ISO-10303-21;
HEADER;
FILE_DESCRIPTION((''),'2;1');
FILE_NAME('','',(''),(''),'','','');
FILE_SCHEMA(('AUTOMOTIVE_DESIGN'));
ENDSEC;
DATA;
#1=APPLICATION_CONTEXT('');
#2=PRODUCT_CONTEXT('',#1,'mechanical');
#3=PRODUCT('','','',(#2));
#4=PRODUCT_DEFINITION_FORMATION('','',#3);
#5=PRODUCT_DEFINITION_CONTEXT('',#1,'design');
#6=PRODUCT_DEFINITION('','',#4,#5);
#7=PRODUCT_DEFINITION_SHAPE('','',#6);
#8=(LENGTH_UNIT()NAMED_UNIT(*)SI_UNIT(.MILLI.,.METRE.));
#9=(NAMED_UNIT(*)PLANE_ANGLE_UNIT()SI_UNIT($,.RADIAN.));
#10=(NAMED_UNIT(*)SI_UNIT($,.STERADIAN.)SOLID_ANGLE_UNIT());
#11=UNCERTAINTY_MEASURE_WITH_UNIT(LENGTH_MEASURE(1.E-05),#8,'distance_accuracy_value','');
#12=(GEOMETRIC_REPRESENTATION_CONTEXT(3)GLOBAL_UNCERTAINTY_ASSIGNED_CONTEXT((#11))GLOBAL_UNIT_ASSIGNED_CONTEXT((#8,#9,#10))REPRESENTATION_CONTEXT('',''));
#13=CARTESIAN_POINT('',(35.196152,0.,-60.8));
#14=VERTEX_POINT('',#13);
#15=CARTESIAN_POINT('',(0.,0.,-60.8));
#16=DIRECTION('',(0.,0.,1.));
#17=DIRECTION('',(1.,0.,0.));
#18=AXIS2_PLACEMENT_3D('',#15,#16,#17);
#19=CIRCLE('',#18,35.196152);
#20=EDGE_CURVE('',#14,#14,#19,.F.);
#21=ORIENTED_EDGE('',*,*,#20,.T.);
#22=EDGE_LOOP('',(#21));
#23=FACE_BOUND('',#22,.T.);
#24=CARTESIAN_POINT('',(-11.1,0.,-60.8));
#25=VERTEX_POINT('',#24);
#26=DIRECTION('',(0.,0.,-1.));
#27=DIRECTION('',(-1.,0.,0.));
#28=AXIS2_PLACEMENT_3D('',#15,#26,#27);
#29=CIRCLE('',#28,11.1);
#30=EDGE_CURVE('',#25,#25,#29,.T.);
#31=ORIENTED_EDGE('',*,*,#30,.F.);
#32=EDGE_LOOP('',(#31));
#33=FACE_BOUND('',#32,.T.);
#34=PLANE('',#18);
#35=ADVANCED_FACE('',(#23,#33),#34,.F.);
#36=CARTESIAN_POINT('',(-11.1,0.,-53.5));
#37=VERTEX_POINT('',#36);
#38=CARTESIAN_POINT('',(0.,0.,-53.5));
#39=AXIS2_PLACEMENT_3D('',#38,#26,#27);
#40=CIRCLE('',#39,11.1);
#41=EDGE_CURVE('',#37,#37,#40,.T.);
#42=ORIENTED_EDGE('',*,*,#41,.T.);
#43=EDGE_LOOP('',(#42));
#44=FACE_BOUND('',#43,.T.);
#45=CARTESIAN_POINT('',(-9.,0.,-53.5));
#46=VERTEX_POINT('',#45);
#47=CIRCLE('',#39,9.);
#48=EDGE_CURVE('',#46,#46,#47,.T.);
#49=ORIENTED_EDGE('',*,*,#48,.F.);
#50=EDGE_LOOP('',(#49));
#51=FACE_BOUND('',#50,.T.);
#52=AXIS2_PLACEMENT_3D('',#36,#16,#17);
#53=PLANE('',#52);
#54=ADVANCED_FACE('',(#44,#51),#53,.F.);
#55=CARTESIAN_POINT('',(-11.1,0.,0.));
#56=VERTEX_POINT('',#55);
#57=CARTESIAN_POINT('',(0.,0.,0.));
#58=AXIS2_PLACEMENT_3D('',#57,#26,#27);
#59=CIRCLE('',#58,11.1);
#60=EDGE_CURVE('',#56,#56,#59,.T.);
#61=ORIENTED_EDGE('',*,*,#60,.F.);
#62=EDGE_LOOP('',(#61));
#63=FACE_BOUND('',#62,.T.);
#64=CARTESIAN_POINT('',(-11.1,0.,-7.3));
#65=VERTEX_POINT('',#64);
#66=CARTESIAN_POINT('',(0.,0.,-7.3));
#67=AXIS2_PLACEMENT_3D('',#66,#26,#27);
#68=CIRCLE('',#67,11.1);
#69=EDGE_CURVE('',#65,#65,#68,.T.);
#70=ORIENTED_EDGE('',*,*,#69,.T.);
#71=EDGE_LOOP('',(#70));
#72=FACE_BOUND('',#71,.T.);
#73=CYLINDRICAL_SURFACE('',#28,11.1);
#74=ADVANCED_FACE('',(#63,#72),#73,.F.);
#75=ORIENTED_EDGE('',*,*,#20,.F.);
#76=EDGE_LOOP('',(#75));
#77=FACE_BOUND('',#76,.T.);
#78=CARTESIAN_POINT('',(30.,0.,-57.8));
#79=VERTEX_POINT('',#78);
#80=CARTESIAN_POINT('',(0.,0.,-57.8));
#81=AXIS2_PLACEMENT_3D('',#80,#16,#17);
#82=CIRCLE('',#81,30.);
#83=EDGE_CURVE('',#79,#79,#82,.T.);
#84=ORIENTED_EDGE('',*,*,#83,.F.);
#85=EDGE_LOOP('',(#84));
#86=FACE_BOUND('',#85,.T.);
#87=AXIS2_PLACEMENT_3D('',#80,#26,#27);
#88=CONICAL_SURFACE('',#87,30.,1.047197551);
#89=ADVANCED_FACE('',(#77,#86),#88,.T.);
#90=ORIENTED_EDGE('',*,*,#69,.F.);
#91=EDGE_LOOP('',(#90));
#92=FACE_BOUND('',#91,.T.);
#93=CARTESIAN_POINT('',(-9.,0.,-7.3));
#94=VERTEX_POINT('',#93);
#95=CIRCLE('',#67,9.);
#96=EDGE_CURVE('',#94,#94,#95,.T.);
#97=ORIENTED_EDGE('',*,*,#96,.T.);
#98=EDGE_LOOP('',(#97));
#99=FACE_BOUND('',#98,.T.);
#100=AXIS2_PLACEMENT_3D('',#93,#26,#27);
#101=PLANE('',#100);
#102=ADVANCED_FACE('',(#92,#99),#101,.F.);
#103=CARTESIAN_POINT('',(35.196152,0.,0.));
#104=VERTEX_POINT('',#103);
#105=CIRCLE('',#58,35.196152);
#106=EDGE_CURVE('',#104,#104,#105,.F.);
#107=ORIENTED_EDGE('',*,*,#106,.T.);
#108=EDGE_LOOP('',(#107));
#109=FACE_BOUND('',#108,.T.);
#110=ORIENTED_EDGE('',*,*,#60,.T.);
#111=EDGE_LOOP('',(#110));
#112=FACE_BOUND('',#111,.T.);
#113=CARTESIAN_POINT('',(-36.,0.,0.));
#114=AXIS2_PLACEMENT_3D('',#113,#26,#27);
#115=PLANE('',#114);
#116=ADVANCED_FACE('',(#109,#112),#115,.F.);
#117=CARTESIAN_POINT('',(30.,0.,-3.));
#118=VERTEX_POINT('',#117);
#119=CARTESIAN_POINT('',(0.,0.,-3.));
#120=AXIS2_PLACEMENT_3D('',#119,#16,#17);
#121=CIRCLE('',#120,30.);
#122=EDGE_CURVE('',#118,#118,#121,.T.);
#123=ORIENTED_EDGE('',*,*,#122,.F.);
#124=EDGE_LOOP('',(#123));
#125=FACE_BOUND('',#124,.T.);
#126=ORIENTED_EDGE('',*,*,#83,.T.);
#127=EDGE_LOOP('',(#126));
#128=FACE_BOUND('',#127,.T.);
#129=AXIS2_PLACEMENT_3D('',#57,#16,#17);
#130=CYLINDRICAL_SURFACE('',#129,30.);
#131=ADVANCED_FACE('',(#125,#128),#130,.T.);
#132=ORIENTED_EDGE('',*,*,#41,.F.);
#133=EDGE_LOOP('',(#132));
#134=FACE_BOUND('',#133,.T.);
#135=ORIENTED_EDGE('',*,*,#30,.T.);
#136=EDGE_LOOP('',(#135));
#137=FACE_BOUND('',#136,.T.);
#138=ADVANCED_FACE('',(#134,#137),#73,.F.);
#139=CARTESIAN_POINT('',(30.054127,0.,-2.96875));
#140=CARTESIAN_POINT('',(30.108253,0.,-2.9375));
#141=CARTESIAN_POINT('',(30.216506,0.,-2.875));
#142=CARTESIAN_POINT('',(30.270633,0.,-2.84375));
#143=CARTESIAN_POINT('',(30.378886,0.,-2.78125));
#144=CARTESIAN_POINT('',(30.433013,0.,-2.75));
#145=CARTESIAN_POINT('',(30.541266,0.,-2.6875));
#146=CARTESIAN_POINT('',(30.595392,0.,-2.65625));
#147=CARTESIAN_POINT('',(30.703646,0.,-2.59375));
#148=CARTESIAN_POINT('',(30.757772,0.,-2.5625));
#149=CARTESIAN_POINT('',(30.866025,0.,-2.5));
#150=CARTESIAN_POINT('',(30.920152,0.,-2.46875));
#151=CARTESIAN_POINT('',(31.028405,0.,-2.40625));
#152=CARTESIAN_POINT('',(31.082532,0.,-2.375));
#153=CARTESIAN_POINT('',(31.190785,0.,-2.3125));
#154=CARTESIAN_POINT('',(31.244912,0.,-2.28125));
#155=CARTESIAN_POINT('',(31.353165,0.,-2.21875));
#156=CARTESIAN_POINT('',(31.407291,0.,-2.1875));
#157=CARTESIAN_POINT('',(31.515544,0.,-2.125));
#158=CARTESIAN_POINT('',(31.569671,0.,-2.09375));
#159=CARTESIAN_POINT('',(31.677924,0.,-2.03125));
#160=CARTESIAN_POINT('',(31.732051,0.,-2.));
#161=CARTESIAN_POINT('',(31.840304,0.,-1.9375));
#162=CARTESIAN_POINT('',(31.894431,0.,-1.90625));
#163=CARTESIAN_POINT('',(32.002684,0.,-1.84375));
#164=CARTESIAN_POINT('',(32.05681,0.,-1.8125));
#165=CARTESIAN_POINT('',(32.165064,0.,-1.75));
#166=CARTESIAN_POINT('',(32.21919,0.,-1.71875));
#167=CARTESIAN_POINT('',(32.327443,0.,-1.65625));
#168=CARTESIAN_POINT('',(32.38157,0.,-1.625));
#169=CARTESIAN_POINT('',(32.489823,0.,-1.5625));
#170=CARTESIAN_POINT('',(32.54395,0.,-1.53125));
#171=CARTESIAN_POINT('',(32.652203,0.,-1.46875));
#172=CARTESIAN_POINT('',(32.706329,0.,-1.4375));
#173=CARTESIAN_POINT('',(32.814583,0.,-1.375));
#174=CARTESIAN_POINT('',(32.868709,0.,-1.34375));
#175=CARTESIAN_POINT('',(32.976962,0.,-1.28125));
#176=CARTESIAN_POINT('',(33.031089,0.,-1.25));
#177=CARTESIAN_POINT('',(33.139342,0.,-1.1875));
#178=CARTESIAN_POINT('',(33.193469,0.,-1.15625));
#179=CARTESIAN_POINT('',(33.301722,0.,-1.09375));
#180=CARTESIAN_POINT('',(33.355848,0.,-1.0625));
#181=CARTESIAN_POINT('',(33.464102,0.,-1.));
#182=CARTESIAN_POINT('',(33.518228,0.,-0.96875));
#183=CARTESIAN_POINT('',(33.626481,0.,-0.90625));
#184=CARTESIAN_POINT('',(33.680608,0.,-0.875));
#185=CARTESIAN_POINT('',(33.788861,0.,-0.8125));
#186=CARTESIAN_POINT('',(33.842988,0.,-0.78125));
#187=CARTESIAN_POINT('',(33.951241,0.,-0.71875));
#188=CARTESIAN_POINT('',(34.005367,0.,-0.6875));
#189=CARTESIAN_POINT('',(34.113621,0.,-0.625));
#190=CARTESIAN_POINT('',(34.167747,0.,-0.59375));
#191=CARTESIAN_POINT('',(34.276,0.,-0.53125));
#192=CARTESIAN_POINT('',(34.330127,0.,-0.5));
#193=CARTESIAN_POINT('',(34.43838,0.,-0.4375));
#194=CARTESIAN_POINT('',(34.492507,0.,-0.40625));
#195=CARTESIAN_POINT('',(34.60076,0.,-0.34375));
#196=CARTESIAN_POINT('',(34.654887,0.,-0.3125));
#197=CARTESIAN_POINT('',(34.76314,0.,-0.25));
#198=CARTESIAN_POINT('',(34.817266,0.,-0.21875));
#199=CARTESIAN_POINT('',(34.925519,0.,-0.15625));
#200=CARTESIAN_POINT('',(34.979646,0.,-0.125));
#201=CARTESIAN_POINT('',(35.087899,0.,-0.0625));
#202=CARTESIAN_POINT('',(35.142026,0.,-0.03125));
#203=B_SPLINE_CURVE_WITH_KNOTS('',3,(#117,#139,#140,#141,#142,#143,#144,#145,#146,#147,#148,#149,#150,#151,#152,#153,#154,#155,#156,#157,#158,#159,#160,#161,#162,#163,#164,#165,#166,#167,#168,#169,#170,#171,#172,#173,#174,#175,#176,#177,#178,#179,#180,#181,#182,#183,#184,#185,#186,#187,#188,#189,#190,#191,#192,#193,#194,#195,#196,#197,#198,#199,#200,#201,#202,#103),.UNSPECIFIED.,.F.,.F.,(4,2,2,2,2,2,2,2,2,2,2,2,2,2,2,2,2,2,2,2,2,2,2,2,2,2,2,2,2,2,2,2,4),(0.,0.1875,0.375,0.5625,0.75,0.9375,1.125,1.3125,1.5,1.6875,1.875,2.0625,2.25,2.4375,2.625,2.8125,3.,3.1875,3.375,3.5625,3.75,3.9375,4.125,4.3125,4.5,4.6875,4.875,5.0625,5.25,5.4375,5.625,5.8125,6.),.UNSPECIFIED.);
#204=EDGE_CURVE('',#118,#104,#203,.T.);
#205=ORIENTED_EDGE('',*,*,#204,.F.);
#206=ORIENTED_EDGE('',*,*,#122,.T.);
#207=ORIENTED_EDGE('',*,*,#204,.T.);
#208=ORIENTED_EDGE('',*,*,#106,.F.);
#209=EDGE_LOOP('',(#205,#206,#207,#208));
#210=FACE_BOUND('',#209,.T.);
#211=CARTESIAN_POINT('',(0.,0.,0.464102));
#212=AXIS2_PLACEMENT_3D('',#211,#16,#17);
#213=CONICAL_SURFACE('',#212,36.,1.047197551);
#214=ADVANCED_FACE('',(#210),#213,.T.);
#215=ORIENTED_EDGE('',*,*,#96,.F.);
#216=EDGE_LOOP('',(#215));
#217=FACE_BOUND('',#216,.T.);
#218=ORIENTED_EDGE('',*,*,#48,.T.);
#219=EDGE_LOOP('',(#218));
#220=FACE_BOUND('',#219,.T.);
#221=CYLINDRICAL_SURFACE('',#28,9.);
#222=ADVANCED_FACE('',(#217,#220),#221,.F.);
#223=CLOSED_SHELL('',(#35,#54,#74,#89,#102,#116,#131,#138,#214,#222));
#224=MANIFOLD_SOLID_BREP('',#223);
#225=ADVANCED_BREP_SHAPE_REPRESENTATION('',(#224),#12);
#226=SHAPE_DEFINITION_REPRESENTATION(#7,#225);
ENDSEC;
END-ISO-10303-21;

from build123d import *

# Parameters (mm, degrees)
CHAMFER1_SIZE   = 3.464101615
CHAMFER1_SIZE_2 = 6


with BuildPart() as part:
    # Sketch1 → Revolve1 (revolve)
    with BuildSketch(Plane(origin=(0, 0, 0), x_dir=(1, 0, 0), z_dir=(0, 1, 0)), mode=Mode.PRIVATE) as revolve1_sk:
        Polygon((0, 0), (0, 60.8), (-36, 60.8), (-36, 57.8), (-30, 57.8), (-30, 3), (-36, 3), (-36, 0), align=None)
    revolve(revolve1_sk.sketch.rotate(Axis((0, 0, 0), (0, 0, -1)), 180), axis=Axis((0, 0, 0), (0, 0, -1)))

    # Sketch7 → Cut-Revolve1 (revolve, cut)
    with BuildSketch(Plane(origin=(0, 0, 0), x_dir=(1, 0, 0), z_dir=(0, 1, 0))):
        Polygon((0, 60.8), (-11.1, 60.8), (-11.1, 53.5), (-9, 53.5), (-9, 7.3), (-11.1, 7.3), (-11.1, 0), (0, 0), align=None)
    revolve(axis=Axis((0, 0, -60.8), (0, 0, 1)), mode=Mode.SUBTRACT)

    # Chamfer1
    # the kernel refuses this chamfer: 6, 3.464101615 mm, written as the material it takes off along each edge
    with BuildSketch(Plane(origin=(0, 0, -57.8), x_dir=(1, 0, 0), z_dir=(0, 1, 0))) as chamfer1_piece_1_section:
        Polygon((36, CHAMFER1_SIZE), (36 - CHAMFER1_SIZE_2, 0), (36, 0), align=None)
    chamfer1_piece_1 = revolve(axis=Axis((0, 0, -57.8), (0, 0, -1)), mode=Mode.PRIVATE)
    chamfer1_piece_1 = chamfer1_piece_1 - Plane(origin=(0, 0, -57.8), x_dir=(1, 0, 0), z_dir=(0, 0, 1)) * Cylinder(30, 144, mode=Mode.PRIVATE)
    add(chamfer1_piece_1, mode=Mode.SUBTRACT)
    with BuildSketch(Plane(origin=(0, 0, -3), x_dir=(1, 0, 0), z_dir=(0, 1, 0))) as chamfer1_piece_2_section:
        Polygon((36 - CHAMFER1_SIZE_2, 0), (36, -CHAMFER1_SIZE), (36, 0), align=None)
    chamfer1_piece_2 = revolve(axis=Axis((0, 0, -3), (0, 0, -1)), mode=Mode.PRIVATE)
    chamfer1_piece_2 = chamfer1_piece_2 - Plane(origin=(0, 0, -3), x_dir=(1, 0, 0), z_dir=(0, 0, 1)) * Cylinder(30, 144, mode=Mode.PRIVATE)
    add(chamfer1_piece_2, mode=Mode.SUBTRACT)


solid = part.part
